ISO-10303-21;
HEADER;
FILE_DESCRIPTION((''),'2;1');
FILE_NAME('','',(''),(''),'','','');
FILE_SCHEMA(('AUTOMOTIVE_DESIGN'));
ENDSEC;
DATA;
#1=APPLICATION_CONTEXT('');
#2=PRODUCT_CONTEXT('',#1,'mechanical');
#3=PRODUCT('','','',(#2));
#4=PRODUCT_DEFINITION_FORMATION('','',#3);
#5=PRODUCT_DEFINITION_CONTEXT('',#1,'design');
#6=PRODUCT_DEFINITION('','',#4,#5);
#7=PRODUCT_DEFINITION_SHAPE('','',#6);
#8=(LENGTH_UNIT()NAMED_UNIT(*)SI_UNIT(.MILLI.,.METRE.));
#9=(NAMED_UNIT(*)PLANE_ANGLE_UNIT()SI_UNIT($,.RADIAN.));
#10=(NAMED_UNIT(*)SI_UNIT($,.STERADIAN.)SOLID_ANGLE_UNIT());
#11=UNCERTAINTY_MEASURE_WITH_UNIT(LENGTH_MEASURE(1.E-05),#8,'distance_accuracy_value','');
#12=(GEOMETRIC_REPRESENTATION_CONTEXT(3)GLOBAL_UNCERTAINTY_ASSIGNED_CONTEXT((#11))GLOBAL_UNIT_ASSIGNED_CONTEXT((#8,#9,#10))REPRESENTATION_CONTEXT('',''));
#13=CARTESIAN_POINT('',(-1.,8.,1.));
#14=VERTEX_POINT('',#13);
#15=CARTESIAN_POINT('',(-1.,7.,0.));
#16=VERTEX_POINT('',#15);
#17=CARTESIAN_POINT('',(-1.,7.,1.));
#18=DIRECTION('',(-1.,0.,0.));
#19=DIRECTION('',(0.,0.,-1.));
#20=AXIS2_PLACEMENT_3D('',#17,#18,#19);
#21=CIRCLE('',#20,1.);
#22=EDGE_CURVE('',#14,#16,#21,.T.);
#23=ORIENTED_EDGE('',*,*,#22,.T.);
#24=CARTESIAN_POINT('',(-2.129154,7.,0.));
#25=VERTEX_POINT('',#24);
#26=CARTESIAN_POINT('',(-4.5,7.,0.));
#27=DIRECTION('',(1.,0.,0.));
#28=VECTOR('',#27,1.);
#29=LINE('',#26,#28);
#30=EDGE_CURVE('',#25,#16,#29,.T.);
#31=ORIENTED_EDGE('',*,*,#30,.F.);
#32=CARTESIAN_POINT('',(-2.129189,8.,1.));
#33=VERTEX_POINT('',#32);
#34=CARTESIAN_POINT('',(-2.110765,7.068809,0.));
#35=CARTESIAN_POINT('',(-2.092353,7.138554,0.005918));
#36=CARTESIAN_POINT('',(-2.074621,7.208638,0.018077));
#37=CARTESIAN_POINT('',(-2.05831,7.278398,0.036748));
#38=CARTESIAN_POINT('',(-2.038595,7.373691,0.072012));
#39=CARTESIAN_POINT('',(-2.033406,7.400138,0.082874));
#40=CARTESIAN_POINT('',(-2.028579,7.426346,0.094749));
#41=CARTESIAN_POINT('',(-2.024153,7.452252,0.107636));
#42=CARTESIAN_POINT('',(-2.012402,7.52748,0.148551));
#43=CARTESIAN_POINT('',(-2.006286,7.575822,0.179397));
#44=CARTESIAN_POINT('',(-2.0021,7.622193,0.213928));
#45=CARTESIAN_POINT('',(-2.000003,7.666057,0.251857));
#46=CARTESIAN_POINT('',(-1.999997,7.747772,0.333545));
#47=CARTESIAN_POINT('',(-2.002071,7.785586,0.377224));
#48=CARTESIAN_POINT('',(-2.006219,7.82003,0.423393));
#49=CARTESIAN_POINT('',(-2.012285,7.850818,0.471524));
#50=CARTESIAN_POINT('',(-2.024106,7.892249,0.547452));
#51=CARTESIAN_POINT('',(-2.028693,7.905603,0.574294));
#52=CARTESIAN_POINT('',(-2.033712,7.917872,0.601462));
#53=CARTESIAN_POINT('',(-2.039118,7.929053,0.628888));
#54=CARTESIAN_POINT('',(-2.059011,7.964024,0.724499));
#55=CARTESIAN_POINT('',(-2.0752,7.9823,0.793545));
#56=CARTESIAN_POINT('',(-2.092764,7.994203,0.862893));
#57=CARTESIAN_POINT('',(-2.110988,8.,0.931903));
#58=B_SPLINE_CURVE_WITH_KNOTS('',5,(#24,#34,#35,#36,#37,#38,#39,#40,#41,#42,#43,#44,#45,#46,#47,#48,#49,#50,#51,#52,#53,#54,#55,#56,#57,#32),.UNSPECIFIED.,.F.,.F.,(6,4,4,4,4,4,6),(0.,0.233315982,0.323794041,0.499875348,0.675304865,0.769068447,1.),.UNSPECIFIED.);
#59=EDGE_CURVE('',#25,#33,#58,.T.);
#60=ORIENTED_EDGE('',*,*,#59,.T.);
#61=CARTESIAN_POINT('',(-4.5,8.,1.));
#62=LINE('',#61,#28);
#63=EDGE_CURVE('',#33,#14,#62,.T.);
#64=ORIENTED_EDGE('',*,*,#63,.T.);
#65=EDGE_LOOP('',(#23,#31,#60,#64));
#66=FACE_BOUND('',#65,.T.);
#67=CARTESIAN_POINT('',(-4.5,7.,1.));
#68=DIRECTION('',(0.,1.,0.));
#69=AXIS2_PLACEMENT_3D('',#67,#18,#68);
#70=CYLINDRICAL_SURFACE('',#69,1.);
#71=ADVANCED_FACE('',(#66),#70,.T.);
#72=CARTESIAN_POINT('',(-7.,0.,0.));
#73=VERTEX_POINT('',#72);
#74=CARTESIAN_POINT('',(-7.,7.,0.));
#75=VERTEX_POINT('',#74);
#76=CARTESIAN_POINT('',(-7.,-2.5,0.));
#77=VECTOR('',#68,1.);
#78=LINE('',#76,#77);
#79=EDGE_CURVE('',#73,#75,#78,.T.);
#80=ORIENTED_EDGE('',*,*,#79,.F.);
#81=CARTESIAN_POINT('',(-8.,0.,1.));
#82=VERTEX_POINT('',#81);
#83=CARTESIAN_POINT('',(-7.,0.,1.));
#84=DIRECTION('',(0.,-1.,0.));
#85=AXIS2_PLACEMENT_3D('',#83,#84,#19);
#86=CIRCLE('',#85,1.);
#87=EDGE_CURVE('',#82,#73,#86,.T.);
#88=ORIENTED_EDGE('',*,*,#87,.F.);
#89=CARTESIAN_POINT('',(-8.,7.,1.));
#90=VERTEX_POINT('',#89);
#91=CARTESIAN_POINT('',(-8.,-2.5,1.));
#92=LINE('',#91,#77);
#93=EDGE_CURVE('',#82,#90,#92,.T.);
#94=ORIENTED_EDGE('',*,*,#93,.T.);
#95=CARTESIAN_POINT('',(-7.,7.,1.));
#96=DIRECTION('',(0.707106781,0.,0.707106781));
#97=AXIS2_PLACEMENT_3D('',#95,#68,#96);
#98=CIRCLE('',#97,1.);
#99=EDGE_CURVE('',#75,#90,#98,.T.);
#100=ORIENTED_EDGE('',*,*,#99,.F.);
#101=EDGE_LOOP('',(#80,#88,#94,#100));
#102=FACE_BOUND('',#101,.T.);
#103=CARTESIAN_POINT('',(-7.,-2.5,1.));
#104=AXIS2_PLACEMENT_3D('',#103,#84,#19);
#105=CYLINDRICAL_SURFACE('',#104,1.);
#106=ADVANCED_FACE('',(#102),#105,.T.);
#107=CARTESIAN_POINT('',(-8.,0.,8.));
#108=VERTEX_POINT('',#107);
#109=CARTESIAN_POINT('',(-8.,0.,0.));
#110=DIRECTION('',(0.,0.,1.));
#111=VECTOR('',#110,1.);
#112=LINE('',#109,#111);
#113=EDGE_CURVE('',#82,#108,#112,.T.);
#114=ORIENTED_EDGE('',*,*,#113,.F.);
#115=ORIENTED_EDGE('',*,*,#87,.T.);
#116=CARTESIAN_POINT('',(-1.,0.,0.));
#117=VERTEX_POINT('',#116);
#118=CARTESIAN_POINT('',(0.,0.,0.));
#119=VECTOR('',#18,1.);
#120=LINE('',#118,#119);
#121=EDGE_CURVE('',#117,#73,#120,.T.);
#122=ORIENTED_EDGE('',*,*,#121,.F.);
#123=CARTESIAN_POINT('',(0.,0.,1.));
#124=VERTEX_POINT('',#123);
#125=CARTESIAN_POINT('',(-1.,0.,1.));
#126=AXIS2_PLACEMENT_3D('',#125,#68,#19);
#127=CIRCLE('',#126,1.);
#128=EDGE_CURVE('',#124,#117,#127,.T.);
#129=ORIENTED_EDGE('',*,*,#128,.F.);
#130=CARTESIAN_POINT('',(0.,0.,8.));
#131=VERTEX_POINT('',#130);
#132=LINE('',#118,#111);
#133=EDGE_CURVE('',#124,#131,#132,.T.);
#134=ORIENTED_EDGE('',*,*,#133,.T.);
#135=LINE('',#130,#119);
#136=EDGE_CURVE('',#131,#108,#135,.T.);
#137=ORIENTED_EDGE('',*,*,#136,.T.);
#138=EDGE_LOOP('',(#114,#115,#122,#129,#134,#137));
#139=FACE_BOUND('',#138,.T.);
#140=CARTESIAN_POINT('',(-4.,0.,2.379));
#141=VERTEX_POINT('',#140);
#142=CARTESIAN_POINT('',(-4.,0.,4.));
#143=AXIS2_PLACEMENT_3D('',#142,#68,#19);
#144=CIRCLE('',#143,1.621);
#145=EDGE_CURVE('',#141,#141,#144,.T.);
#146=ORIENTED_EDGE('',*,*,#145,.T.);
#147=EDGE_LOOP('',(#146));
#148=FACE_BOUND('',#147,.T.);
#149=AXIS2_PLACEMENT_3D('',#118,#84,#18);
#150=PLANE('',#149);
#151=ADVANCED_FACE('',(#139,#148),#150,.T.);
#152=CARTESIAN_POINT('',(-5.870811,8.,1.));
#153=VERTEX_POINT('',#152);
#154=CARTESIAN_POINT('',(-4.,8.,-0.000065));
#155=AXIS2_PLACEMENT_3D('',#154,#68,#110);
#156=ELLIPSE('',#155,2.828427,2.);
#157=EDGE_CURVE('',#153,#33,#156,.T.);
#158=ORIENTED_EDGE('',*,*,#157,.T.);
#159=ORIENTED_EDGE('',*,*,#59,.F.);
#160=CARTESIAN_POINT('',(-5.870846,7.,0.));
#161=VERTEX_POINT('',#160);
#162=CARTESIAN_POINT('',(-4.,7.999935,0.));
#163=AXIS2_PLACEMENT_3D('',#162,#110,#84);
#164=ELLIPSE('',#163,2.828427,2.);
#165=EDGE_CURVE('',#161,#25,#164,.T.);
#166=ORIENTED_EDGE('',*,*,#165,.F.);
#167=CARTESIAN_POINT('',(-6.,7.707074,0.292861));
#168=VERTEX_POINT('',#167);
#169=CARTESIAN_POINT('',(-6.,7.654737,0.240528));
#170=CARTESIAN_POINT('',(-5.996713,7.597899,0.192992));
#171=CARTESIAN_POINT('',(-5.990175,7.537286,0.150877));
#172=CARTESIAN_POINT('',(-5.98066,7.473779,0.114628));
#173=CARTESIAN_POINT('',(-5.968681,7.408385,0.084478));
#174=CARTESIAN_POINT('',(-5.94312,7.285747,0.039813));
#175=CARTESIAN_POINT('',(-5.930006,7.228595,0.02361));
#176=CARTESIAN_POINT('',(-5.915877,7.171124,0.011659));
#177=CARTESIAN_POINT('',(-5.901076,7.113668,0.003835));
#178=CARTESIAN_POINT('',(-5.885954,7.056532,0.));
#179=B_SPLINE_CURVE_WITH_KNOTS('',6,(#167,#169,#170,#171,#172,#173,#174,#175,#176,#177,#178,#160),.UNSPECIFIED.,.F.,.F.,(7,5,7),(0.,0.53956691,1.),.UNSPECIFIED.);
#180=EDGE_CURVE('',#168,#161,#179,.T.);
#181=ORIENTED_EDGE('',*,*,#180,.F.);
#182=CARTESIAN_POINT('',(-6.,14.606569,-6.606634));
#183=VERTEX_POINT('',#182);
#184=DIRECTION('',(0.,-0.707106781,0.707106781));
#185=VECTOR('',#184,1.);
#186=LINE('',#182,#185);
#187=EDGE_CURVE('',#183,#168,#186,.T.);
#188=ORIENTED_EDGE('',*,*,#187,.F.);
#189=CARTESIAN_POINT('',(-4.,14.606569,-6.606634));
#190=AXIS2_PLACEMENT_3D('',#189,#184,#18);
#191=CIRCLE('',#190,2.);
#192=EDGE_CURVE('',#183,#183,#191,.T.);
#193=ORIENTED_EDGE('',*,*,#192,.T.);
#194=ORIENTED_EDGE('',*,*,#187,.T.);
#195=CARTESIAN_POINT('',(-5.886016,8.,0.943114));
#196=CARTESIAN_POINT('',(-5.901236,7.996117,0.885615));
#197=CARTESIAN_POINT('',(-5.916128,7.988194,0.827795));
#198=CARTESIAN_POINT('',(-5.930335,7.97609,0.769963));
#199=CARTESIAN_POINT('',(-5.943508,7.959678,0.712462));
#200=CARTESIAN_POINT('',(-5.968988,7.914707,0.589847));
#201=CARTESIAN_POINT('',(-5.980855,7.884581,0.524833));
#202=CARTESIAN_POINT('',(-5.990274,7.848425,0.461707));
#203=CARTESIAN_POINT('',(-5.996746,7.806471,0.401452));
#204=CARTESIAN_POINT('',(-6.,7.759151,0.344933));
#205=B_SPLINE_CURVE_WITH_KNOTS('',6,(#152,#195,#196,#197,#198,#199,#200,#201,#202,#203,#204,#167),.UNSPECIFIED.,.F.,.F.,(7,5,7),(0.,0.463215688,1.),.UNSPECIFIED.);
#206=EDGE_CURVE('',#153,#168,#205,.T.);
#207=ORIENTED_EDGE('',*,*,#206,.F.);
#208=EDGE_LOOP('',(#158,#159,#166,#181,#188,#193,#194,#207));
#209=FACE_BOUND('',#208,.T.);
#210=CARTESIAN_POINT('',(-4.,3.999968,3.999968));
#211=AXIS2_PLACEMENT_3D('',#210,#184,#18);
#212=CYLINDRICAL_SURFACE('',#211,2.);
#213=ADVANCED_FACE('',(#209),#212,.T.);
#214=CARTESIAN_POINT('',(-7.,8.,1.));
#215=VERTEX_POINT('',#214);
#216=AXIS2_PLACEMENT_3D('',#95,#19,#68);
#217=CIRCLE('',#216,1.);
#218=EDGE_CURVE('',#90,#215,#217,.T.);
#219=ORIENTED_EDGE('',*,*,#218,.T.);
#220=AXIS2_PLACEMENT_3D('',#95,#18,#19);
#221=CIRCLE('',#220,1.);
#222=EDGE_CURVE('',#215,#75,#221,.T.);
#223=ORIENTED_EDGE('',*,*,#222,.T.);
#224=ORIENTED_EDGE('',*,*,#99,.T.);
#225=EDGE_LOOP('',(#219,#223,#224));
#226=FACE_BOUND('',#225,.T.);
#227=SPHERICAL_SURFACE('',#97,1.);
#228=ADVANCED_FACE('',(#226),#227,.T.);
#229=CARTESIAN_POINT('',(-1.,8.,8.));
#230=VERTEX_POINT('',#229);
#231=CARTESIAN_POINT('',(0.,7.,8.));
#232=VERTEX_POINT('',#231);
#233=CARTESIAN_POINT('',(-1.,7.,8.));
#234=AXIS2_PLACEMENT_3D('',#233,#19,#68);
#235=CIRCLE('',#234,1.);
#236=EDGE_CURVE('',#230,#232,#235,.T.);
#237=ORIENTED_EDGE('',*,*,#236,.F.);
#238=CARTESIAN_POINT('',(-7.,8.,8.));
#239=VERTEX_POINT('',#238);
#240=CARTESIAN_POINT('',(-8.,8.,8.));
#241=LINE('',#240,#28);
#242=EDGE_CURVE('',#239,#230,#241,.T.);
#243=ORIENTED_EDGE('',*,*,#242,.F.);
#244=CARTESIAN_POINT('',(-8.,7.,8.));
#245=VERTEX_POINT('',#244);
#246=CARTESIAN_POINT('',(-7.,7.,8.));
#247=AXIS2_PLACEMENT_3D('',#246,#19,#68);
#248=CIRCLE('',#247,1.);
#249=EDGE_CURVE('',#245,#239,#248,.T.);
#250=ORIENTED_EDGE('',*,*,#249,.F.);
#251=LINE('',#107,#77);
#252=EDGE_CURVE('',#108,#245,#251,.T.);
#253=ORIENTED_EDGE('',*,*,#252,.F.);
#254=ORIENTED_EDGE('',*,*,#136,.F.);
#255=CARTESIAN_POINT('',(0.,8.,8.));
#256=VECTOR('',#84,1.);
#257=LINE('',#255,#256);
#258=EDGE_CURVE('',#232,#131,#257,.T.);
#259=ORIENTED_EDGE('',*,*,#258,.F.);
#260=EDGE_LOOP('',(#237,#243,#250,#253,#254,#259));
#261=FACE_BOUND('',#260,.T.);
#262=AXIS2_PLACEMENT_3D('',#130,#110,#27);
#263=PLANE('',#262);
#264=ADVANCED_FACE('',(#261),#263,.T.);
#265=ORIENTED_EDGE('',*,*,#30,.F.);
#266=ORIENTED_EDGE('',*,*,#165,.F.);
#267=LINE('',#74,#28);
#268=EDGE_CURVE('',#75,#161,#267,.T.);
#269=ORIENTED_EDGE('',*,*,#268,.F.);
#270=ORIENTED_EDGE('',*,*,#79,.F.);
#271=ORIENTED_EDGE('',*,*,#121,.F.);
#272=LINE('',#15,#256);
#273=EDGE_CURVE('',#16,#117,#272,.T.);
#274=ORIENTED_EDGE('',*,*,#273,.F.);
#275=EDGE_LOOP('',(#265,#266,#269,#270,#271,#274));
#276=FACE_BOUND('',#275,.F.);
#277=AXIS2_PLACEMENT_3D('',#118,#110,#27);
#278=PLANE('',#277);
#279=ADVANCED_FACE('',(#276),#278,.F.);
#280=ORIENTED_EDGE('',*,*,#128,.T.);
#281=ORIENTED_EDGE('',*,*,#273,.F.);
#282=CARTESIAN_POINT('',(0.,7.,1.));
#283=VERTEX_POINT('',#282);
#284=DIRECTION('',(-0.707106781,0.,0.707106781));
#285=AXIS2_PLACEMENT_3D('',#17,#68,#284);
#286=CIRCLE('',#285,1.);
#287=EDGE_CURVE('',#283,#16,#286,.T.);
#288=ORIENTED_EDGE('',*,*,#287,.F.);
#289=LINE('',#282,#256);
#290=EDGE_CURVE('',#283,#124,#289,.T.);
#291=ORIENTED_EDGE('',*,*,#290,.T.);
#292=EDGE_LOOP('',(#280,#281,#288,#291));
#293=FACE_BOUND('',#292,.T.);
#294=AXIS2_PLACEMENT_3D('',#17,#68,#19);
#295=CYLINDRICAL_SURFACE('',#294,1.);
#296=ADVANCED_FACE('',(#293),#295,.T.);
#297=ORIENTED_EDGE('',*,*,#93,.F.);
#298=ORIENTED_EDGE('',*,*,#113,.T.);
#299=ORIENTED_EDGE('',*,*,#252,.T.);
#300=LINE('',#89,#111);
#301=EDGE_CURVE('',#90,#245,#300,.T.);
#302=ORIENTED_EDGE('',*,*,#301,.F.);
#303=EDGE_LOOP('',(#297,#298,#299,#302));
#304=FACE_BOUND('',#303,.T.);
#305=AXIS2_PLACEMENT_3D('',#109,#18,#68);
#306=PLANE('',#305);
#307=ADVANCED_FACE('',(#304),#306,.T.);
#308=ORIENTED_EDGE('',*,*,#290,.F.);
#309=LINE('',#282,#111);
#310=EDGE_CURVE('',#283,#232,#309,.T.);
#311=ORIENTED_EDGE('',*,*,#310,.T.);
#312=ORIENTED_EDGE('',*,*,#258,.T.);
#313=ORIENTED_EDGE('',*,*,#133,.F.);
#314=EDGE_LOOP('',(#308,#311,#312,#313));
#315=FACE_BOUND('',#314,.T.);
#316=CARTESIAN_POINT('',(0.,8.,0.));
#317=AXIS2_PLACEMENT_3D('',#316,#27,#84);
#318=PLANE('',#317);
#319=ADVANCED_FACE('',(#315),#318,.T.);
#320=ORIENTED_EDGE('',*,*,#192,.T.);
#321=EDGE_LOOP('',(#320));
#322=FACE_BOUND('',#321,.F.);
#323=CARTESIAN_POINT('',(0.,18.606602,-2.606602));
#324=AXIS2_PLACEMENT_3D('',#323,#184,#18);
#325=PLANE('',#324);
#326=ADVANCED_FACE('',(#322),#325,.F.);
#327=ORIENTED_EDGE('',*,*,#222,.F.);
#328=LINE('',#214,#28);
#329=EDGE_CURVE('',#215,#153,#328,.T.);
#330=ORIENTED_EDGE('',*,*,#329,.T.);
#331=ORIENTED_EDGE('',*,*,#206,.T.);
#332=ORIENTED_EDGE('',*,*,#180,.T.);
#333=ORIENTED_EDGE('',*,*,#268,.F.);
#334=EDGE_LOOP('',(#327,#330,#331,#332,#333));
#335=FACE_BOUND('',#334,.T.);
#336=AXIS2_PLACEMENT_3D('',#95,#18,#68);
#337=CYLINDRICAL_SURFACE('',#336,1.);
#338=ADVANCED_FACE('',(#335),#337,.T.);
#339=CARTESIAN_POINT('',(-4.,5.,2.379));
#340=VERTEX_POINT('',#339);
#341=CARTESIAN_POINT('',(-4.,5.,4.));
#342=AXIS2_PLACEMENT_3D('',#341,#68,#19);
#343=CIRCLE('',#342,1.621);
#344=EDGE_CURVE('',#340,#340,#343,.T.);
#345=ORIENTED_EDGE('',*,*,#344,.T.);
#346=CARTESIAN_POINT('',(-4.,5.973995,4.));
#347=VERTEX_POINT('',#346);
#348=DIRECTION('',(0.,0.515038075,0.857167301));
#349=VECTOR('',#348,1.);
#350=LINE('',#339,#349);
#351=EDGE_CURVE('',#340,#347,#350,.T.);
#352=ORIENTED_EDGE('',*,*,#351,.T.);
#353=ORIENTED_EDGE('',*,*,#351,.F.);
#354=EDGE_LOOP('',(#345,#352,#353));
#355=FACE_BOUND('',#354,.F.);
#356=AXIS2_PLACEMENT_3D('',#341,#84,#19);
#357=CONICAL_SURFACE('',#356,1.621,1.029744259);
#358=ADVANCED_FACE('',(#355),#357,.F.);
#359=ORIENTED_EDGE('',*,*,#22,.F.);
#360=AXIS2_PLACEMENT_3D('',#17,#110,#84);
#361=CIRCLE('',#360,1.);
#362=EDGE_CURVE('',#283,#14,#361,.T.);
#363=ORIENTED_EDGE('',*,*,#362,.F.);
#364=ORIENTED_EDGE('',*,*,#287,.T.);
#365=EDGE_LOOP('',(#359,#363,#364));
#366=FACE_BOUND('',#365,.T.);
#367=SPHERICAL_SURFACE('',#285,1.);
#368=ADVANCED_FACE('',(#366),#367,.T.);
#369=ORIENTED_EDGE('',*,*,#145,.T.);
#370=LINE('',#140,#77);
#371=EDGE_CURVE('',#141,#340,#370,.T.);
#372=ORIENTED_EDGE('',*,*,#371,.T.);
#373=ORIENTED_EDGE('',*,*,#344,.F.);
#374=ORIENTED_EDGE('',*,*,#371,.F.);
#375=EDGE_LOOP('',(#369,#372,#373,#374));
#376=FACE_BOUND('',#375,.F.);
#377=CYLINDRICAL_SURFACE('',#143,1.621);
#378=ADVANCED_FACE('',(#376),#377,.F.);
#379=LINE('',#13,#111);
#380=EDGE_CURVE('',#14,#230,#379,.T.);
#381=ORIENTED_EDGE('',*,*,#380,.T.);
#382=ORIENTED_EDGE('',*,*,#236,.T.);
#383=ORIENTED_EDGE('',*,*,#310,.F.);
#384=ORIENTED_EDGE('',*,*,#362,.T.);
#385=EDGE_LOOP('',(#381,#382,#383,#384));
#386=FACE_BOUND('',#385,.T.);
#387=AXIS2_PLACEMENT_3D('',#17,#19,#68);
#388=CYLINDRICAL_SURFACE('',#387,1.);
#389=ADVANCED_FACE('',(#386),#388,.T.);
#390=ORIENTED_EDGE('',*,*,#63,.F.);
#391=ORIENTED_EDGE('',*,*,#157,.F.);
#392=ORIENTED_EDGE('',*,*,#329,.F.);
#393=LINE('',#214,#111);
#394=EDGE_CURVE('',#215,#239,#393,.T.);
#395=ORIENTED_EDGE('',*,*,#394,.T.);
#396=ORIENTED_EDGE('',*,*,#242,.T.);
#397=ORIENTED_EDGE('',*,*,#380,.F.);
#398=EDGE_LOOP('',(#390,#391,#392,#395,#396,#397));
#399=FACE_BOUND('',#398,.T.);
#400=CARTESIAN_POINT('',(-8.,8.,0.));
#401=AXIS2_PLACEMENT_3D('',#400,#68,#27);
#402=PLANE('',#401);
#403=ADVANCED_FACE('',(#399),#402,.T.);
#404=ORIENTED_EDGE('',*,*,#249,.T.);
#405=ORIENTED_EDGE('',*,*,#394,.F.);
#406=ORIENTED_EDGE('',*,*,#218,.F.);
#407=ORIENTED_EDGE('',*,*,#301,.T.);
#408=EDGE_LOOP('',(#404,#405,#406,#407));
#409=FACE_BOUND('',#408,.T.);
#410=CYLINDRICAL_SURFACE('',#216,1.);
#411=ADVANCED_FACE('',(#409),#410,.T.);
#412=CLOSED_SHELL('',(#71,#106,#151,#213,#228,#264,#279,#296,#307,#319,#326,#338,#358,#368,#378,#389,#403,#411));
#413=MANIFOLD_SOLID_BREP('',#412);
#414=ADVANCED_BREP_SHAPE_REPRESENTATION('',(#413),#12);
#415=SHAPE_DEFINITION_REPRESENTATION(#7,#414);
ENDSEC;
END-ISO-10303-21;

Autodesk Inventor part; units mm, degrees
ref_plane "YZ Plane" through (0, 0, 0) normal (1, 0, 0) x (0, 1, 0)
ref_plane "XZ Plane" through (0, 0, 0) normal (0, 1, 0) x (-1, 0, 0)
sketch "Sketch1" plane through (0, 0, 0) normal (0, 0, 1) x (1, 0, 0)
  line L0 (-8, 8) -> (0, 8)
  line L1 (0, 8) -> (0, 0)
  line L2 (0, 0) -> (-8, 0)
  line L3 (-8, 0) -> (-8, 8)
  dimension "d0" = 8
  dimension "d1" = 8
extrude "Extrusion1" add sketch "Sketch1" along normal blind 8
sketch "Sketch5" plane through (0, 0, 8) normal (0, 0, 1) x (1, 0, 0)
  point P0 (0, 0)
sketch "Sketch8" plane through (-8, 8, 0) normal (0, 1, 0) x (1, 0, 0)
  line L0 (8, -8) -> (0, -8) projected
  line L1 (0, 0) -> (0, -8) projected
  point P0 (8, 0)
  point P1 (4, -3)
  dimension "d14" = 5
  dimension "d15" = 4
ref_plane "Work Plane3" through (0, 8, 8) normal (0, -0.7071068, 0.7071068) x (-1, 0, 0)
sketch "Sketch11" plane through (0, 8, 8) normal (0, -0.7071068, 0.7071068) x (-1, 0, 0)
  line L0 (8, 5.6569) -> (0, 5.6569) projected
  circle A0 centre (4, 5.6569) radius 2
  point P0 (0, 11.3137)
  dimension "d21" = 4
extrude "Extrusion4" add sketch "Sketch11" against normal blind 15
sketch "Sketch12" plane through (-8, 0, 0) normal (0, -1, 0) x (1, 0, 0)
  point P0 (8, 0)
  point P1 (4, 4)
  dimension "d24" = 4
  dimension "d25" = 4
hole "Hole1" at (-4, 0, 4) direction (0, 1, 0) diameter 3.242 depth 5 tip angle 118 thread size "M4x0.7" class "6H" standard "ISO Metric profile"
fillet "Fillet1" radius 1 6 edges at (-7, 8, 0) (-8, 8, 4) (-8, 4, 0) (-1, 8, 0) (0, 8, 4) (0, 4, 0)
properties part number "as2"
